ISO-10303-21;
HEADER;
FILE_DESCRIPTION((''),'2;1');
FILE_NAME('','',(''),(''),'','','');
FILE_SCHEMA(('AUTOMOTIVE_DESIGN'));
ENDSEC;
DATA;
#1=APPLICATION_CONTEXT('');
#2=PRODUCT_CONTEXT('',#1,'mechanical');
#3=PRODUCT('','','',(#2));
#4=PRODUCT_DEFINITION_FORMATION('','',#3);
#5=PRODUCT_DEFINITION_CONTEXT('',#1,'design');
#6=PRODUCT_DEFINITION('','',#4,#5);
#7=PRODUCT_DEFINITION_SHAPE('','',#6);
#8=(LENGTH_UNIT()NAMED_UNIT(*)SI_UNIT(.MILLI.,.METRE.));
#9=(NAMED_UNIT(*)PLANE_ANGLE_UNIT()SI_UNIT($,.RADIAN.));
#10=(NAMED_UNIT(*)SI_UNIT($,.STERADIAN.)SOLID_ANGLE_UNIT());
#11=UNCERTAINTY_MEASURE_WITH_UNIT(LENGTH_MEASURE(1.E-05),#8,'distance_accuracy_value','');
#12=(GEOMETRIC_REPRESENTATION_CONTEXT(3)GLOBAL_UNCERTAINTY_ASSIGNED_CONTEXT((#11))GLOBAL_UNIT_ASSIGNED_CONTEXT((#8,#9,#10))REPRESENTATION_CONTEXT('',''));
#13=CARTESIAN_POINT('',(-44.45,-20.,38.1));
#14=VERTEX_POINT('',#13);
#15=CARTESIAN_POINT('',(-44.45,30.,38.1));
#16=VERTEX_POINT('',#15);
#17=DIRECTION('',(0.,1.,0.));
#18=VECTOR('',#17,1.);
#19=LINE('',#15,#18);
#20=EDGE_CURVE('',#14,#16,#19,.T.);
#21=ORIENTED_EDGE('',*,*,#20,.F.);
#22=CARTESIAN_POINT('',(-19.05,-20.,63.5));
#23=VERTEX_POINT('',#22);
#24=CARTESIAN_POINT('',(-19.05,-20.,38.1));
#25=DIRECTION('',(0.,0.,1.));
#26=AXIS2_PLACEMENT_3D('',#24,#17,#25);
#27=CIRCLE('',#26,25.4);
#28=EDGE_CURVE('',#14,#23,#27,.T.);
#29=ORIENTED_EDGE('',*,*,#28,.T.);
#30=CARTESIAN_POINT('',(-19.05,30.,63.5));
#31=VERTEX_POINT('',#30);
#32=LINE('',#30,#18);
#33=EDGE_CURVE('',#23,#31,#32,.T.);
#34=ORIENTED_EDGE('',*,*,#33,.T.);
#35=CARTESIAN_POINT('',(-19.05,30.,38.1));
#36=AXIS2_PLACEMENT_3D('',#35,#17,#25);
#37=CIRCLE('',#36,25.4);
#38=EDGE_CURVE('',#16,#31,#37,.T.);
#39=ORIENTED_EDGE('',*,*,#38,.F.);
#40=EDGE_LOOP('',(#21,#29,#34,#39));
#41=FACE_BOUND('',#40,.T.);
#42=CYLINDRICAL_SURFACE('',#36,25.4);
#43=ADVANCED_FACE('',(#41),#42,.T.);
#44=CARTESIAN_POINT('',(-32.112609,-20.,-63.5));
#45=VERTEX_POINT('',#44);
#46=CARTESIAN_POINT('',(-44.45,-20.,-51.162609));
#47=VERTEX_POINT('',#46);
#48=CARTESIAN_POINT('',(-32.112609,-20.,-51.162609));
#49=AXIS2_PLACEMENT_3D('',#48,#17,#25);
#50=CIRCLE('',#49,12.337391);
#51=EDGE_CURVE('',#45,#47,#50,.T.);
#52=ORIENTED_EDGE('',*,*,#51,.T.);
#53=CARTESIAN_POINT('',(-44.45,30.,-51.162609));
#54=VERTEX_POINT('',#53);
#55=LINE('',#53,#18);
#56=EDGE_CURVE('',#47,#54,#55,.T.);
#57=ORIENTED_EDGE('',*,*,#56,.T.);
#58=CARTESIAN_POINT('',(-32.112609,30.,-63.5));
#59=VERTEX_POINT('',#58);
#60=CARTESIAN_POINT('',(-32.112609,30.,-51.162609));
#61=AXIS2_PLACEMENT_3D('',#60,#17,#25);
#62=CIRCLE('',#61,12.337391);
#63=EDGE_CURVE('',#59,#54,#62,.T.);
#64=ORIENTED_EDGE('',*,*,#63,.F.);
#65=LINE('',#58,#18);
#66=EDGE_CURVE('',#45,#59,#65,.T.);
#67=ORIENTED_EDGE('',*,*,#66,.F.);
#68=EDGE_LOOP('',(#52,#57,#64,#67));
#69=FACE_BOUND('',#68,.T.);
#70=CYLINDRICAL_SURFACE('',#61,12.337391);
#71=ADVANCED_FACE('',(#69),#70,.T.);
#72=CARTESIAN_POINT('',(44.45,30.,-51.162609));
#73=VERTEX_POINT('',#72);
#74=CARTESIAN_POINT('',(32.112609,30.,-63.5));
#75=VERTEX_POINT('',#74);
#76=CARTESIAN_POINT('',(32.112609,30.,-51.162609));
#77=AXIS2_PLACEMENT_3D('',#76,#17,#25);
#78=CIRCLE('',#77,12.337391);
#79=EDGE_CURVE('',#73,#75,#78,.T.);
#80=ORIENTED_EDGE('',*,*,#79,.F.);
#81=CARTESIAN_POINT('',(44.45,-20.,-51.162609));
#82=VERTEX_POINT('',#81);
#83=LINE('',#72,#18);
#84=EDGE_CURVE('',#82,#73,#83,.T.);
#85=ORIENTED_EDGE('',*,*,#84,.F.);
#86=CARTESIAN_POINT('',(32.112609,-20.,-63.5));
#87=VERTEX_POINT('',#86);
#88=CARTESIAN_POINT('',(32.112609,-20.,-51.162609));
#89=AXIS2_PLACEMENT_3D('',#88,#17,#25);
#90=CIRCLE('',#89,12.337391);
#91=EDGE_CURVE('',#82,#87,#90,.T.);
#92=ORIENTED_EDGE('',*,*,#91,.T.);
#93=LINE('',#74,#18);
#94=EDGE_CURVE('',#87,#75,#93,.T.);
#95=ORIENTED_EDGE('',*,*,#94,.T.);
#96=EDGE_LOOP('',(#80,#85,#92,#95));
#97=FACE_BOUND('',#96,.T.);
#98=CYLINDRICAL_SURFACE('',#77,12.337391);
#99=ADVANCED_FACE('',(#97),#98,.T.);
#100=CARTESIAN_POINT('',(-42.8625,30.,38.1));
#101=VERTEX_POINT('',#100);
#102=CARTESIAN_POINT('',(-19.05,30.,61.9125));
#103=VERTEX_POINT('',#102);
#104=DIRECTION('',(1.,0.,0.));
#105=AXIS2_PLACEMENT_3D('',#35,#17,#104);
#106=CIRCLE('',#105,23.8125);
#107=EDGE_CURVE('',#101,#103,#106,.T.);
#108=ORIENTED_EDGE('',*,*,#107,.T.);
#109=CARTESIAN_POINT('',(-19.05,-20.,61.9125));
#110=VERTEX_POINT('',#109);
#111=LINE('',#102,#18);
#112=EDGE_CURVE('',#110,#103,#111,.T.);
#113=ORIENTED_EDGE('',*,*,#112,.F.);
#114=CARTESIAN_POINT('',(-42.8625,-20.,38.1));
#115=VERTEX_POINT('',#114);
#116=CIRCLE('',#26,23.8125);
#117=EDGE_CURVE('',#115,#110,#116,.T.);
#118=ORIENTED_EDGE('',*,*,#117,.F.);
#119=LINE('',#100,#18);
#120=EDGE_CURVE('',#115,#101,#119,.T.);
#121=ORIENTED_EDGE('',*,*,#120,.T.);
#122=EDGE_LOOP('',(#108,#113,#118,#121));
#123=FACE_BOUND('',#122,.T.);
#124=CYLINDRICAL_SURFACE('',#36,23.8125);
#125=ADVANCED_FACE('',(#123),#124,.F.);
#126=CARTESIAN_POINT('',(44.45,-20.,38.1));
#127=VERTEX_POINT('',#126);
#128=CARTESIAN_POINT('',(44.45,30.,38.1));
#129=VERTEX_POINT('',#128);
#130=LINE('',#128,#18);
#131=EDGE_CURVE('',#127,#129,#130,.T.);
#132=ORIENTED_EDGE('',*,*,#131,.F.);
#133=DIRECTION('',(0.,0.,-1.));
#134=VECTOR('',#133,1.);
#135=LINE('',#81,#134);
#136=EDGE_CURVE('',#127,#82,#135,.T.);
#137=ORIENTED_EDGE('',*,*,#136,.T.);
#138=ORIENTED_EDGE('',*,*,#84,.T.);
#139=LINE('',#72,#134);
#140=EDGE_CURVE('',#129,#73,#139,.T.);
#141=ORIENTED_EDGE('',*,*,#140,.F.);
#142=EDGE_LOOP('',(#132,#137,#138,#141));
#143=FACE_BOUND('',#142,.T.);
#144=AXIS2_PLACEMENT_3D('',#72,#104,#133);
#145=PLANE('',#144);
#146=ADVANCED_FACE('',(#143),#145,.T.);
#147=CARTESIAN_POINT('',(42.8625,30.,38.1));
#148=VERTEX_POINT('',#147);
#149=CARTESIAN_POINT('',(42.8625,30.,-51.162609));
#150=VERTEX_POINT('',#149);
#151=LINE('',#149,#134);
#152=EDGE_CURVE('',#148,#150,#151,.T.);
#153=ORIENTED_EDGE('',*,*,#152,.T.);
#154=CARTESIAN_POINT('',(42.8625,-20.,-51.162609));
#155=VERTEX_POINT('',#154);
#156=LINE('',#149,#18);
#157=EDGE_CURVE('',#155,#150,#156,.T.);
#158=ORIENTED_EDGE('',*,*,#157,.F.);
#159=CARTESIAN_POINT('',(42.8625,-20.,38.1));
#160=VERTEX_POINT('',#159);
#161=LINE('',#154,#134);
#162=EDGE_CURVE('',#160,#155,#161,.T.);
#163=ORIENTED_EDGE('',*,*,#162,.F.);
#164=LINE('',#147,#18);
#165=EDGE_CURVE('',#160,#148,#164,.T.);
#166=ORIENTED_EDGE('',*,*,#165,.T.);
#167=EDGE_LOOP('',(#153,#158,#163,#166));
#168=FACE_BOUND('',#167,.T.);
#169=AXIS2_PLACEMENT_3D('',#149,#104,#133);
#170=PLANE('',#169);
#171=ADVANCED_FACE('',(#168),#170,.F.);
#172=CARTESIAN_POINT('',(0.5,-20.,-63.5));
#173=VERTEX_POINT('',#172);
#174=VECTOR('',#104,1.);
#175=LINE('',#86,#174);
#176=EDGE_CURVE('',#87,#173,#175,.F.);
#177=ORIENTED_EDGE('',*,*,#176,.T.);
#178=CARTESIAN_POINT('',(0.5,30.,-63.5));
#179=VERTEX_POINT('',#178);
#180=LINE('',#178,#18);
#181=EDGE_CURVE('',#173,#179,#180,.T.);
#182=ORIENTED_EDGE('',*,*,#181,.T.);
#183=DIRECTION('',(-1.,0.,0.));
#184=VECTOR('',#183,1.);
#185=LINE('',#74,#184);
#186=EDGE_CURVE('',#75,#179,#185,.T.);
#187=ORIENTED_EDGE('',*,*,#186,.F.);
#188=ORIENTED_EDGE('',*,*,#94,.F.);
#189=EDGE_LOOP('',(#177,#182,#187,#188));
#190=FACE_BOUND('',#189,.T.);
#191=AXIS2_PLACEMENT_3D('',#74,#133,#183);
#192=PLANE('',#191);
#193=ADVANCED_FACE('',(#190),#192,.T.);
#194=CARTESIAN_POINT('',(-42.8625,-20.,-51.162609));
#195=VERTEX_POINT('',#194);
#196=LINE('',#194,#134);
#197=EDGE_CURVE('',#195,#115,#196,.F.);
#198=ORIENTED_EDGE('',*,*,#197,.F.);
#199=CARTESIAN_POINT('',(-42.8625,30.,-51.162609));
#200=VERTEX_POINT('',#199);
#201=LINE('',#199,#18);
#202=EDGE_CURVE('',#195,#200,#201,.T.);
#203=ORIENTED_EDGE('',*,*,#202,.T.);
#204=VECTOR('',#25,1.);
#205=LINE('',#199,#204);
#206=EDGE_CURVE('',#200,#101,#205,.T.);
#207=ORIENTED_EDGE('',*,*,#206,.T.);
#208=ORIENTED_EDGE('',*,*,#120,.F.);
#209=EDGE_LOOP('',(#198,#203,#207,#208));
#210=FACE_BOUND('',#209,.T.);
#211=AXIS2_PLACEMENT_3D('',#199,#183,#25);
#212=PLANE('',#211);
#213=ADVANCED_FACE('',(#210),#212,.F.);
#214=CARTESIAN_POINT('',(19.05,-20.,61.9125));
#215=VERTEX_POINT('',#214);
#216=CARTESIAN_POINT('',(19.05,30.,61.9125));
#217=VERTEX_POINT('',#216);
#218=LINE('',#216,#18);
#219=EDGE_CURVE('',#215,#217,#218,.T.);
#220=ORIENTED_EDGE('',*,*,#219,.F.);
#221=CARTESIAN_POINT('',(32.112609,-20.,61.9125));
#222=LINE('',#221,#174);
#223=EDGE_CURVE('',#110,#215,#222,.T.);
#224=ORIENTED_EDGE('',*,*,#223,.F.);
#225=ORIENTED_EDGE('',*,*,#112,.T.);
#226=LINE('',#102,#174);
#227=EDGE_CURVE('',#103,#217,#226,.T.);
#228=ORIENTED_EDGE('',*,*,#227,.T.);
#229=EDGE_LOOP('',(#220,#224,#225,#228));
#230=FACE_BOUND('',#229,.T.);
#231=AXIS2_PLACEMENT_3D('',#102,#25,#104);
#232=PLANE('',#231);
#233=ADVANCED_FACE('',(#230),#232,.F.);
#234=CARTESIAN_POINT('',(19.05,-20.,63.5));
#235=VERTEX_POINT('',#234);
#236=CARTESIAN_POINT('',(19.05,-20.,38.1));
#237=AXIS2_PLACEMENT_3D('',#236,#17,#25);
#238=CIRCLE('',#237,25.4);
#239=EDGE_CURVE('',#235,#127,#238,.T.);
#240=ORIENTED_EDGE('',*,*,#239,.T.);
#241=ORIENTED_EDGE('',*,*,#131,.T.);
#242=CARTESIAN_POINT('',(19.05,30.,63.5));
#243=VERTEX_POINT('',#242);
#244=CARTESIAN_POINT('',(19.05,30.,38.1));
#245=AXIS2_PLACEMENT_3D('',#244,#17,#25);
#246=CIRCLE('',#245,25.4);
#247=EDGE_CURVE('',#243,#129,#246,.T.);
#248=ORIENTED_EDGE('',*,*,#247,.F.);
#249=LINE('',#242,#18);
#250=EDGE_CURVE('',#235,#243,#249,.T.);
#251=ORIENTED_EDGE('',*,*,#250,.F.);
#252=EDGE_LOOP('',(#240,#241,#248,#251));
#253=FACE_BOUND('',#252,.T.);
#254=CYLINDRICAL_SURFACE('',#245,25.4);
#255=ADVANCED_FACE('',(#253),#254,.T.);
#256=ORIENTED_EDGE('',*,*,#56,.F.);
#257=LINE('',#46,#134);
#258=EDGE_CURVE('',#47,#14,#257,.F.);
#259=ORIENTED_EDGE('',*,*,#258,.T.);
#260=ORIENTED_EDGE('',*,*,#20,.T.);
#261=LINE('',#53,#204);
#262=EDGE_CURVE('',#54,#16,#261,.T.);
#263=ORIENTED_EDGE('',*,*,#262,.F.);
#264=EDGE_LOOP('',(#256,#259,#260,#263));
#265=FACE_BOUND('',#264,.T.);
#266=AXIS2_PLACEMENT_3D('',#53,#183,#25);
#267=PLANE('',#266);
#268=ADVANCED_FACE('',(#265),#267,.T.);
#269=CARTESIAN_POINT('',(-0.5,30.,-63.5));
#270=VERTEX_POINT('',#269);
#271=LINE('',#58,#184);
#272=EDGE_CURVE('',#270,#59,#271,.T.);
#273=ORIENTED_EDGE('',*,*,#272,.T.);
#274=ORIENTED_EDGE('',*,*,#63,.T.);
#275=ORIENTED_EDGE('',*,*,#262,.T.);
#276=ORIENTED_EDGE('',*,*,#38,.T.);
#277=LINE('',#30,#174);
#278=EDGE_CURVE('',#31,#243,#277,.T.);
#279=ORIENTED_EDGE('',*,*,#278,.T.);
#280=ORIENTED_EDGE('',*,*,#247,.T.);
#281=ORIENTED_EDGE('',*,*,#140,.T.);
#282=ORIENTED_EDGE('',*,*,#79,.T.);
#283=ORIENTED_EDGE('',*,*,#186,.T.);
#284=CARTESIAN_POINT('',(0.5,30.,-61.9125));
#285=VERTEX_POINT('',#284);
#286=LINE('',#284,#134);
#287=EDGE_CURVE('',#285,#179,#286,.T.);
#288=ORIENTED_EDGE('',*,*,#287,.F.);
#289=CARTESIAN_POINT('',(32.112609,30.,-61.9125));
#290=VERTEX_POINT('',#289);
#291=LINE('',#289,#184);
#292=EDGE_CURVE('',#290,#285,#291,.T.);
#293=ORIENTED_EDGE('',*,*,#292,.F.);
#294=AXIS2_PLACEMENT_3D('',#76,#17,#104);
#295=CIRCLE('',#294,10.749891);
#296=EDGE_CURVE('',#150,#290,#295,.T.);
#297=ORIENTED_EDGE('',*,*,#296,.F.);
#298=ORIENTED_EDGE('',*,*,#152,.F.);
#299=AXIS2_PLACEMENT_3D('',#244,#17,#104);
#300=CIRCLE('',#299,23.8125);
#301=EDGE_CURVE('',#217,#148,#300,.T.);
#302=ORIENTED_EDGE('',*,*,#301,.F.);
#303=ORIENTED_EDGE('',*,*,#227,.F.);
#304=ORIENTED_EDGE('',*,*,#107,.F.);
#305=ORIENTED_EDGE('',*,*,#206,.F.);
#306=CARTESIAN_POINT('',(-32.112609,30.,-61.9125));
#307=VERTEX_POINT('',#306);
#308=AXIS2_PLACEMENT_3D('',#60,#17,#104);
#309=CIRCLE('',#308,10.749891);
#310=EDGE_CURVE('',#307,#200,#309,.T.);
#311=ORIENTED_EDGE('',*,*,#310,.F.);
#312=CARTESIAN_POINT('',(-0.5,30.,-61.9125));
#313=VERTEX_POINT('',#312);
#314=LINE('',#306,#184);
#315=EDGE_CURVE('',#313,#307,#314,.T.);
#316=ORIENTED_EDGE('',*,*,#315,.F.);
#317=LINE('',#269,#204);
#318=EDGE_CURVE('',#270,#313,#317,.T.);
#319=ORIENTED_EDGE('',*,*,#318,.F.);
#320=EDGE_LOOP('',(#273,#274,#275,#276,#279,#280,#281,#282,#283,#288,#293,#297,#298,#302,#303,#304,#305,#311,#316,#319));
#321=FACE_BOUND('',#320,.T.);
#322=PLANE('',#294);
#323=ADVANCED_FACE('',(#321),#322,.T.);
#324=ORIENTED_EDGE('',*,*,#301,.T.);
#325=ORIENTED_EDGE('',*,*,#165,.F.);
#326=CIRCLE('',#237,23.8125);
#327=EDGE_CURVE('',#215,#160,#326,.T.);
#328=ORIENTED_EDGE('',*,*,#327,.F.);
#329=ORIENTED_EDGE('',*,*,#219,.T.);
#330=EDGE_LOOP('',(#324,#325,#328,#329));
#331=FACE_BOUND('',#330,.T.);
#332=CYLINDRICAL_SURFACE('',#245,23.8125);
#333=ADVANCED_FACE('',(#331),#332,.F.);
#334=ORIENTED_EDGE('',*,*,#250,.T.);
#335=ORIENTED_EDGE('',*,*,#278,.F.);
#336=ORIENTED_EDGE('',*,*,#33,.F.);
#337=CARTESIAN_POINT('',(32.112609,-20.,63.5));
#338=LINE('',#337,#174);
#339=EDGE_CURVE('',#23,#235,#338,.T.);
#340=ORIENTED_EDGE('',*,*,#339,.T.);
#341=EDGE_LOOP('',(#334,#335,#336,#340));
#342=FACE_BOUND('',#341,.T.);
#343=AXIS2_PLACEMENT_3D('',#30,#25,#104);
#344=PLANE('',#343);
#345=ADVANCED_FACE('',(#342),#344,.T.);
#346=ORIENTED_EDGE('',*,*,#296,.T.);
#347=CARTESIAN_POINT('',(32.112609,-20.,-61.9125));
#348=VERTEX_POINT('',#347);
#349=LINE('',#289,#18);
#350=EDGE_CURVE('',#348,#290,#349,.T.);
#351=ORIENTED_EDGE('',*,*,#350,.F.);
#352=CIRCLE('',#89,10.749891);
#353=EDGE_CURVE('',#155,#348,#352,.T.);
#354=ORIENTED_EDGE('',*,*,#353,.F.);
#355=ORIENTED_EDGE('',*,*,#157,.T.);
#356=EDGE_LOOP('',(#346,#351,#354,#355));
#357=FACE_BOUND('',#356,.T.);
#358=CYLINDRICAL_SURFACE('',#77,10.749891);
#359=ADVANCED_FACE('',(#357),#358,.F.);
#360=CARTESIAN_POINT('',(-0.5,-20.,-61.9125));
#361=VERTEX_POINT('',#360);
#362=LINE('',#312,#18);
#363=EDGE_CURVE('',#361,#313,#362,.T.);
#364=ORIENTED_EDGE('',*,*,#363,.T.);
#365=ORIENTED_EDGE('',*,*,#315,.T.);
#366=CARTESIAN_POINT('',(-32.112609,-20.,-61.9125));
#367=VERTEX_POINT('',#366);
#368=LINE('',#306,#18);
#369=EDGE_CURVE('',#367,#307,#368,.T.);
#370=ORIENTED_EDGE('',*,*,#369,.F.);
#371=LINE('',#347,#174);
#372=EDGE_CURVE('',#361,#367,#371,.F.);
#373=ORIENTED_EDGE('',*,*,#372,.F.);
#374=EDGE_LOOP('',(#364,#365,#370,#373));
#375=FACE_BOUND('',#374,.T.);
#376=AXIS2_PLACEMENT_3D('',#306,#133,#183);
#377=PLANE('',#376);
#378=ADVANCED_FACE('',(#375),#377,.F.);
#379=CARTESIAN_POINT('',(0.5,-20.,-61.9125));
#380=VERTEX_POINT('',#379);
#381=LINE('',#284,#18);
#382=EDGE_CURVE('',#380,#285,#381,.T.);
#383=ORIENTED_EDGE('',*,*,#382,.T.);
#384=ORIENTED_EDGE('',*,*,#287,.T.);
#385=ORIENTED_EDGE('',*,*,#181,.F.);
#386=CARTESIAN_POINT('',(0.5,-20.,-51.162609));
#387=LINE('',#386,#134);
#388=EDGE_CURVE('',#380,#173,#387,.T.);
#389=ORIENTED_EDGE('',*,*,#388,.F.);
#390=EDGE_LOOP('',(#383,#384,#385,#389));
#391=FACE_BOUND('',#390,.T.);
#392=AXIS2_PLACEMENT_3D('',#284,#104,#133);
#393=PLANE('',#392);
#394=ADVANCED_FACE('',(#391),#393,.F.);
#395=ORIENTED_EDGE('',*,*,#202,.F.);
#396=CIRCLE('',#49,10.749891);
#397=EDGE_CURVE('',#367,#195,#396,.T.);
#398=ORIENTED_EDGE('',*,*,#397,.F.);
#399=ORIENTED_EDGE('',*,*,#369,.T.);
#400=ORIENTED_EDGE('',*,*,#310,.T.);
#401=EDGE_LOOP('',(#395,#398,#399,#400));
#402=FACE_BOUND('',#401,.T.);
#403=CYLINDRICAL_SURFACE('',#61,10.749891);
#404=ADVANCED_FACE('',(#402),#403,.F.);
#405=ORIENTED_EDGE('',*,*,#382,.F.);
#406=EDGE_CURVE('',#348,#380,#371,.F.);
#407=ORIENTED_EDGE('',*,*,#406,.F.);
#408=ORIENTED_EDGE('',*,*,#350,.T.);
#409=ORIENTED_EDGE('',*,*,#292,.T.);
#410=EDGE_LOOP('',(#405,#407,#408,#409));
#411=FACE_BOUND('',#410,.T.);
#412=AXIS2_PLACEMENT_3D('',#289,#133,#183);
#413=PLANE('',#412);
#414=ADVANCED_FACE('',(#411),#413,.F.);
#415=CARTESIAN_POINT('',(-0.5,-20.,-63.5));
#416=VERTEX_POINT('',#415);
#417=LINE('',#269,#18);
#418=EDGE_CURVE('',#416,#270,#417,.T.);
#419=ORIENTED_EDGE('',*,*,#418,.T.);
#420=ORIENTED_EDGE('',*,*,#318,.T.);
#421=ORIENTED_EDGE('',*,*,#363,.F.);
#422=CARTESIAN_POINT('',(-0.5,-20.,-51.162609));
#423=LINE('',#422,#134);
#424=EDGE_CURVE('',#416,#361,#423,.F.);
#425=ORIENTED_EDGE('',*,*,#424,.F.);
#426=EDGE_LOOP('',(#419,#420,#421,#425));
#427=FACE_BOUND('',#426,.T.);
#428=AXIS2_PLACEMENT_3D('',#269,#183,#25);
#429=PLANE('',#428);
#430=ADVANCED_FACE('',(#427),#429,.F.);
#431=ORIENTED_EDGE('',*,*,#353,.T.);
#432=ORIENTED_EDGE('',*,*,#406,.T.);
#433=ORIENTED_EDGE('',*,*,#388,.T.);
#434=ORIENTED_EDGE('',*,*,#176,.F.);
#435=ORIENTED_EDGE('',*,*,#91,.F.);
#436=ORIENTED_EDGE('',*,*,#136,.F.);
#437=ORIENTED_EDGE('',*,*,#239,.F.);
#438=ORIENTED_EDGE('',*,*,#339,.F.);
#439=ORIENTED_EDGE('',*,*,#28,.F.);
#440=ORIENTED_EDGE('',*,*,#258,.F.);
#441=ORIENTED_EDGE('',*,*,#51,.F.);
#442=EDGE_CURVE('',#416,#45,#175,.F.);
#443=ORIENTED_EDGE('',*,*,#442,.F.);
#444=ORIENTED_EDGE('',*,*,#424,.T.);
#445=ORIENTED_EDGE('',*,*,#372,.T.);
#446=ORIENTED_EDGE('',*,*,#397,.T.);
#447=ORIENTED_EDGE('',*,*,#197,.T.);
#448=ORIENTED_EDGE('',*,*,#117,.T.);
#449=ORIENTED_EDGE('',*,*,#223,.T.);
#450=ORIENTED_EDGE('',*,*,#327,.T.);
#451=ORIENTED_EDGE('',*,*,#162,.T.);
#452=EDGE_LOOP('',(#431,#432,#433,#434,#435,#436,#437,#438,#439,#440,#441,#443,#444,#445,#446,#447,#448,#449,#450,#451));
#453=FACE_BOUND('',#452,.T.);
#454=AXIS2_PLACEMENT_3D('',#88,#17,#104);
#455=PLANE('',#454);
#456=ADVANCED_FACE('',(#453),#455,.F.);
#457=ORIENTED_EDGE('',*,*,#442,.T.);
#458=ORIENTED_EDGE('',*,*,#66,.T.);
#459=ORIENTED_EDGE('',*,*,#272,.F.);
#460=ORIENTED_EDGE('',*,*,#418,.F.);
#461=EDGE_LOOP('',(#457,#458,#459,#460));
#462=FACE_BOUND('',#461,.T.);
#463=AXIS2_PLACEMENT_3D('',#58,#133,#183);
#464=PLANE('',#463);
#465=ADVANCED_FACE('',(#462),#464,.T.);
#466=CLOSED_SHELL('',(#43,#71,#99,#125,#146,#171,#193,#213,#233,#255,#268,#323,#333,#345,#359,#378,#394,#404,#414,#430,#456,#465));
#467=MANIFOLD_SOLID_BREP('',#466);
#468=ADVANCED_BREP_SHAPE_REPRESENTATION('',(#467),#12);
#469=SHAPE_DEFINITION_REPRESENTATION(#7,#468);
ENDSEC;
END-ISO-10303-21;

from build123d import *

# Parameters (mm, degrees)
EXTRUDE_THIN1_DEPTH  = 30
CONVERT_SOLID1_START = -20
CONVERT_SOLID1_DEPTH = 20


# Read off the part's stored shape, not the designer's step: Convert-Solid1
with BuildPart() as part:
    # Sketch1 → Extrude-Thin1 (new body)
    with BuildSketch(Plane(origin=(0, 0, 0), x_dir=(1, 0, 0), z_dir=(0, 1, 0))):
        with BuildLine():
            Line((0.5, 63.5), (32.11260948, 63.5))
            ThreePointArc((32.11260948, 63.5), (40.836461979, 59.886461979), (44.45, 51.16260948))
            Line((44.45, 51.16260948), (44.45, -38.1))
            ThreePointArc((44.45, -38.1), (37.010512242, -56.060512242), (19.05, -63.5))
            Line((19.05, -63.5), (-19.05, -63.5))
            ThreePointArc((-19.05, -63.5), (-37.010512242, -56.060512242), (-44.45, -38.1))
            Line((-44.45, -38.1), (-44.45, 51.16260948))
            ThreePointArc((-44.45, 51.16260948), (-40.836461979, 59.886461979), (-32.11260948, 63.5))
            Line((-32.11260948, 63.5), (-0.5, 63.5))
            Line((-0.5, 63.5), (-0.5, 61.9125))
            Line((-0.5, 61.9125), (-32.11260948, 61.9125))
            ThreePointArc((-32.11260948, 61.9125), (-39.713929964, 58.763929964), (-42.8625, 51.16260948))
            Line((-42.8625, 51.16260948), (-42.8625, -38.1))
            ThreePointArc((-42.8625, -38.1), (-35.887980227, -54.937980227), (-19.05, -61.9125))
            Line((-19.05, -61.9125), (19.05, -61.9125))
            ThreePointArc((19.05, -61.9125), (35.887980227, -54.937980227), (42.8625, -38.1))
            Line((42.8625, -38.1), (42.8625, 51.16260948))
            ThreePointArc((42.8625, 51.16260948), (39.713929964, 58.763929964), (32.11260948, 61.9125))
            Line((32.11260948, 61.9125), (0.5, 61.9125))
            Line((0.5, 61.9125), (0.5, 63.5))
        make_face()
    extrude(amount=EXTRUDE_THIN1_DEPTH)

    # Convert-Solid1 outline → Convert-Solid1 (add)
    with BuildSketch(Plane(origin=(0, 0, 0), x_dir=(1, 0, 0), z_dir=(0, 1, 0)).offset(CONVERT_SOLID1_START)):
        with BuildLine():
            Line((0.5, 61.9125), (32.11260948, 61.9125))
            ThreePointArc((32.11260948, 61.9125), (39.713929964, 58.763929964), (42.8625, 51.16260948))
            Line((42.8625, 51.16260948), (42.8625, -38.1))
            ThreePointArc((42.8625, -38.1), (35.887980227, -54.937980227), (19.05, -61.9125))
            Line((19.05, -61.9125), (-19.05, -61.9125))
            ThreePointArc((-19.05, -61.9125), (-35.887980227, -54.937980227), (-42.8625, -38.1))
            Line((-42.8625, -38.1), (-42.8625, 51.16260948))
            ThreePointArc((-42.8625, 51.16260948), (-39.713929964, 58.763929964), (-32.11260948, 61.9125))
            Line((-32.11260948, 61.9125), (-0.5, 61.9125))
            Line((-0.5, 61.9125), (-0.5, 63.5))
            Line((-0.5, 63.5), (-32.11260948, 63.5))
            ThreePointArc((-32.11260948, 63.5), (-40.836461979, 59.886461979), (-44.45, 51.16260948))
            Line((-44.45, 51.16260948), (-44.45, -38.1))
            ThreePointArc((-44.45, -38.1), (-37.010512242, -56.060512242), (-19.05, -63.5))
            Line((-19.05, -63.5), (19.05, -63.5))
            ThreePointArc((19.05, -63.5), (37.010512242, -56.060512242), (44.45, -38.1))
            Line((44.45, -38.1), (44.45, 51.16260948))
            ThreePointArc((44.45, 51.16260948), (40.836461979, 59.886461979), (32.11260948, 63.5))
            Line((32.11260948, 63.5), (0.5, 63.5))
            Line((0.5, 63.5), (0.5, 61.9125))
        make_face()
    extrude(amount=CONVERT_SOLID1_DEPTH)


solid = part.part
